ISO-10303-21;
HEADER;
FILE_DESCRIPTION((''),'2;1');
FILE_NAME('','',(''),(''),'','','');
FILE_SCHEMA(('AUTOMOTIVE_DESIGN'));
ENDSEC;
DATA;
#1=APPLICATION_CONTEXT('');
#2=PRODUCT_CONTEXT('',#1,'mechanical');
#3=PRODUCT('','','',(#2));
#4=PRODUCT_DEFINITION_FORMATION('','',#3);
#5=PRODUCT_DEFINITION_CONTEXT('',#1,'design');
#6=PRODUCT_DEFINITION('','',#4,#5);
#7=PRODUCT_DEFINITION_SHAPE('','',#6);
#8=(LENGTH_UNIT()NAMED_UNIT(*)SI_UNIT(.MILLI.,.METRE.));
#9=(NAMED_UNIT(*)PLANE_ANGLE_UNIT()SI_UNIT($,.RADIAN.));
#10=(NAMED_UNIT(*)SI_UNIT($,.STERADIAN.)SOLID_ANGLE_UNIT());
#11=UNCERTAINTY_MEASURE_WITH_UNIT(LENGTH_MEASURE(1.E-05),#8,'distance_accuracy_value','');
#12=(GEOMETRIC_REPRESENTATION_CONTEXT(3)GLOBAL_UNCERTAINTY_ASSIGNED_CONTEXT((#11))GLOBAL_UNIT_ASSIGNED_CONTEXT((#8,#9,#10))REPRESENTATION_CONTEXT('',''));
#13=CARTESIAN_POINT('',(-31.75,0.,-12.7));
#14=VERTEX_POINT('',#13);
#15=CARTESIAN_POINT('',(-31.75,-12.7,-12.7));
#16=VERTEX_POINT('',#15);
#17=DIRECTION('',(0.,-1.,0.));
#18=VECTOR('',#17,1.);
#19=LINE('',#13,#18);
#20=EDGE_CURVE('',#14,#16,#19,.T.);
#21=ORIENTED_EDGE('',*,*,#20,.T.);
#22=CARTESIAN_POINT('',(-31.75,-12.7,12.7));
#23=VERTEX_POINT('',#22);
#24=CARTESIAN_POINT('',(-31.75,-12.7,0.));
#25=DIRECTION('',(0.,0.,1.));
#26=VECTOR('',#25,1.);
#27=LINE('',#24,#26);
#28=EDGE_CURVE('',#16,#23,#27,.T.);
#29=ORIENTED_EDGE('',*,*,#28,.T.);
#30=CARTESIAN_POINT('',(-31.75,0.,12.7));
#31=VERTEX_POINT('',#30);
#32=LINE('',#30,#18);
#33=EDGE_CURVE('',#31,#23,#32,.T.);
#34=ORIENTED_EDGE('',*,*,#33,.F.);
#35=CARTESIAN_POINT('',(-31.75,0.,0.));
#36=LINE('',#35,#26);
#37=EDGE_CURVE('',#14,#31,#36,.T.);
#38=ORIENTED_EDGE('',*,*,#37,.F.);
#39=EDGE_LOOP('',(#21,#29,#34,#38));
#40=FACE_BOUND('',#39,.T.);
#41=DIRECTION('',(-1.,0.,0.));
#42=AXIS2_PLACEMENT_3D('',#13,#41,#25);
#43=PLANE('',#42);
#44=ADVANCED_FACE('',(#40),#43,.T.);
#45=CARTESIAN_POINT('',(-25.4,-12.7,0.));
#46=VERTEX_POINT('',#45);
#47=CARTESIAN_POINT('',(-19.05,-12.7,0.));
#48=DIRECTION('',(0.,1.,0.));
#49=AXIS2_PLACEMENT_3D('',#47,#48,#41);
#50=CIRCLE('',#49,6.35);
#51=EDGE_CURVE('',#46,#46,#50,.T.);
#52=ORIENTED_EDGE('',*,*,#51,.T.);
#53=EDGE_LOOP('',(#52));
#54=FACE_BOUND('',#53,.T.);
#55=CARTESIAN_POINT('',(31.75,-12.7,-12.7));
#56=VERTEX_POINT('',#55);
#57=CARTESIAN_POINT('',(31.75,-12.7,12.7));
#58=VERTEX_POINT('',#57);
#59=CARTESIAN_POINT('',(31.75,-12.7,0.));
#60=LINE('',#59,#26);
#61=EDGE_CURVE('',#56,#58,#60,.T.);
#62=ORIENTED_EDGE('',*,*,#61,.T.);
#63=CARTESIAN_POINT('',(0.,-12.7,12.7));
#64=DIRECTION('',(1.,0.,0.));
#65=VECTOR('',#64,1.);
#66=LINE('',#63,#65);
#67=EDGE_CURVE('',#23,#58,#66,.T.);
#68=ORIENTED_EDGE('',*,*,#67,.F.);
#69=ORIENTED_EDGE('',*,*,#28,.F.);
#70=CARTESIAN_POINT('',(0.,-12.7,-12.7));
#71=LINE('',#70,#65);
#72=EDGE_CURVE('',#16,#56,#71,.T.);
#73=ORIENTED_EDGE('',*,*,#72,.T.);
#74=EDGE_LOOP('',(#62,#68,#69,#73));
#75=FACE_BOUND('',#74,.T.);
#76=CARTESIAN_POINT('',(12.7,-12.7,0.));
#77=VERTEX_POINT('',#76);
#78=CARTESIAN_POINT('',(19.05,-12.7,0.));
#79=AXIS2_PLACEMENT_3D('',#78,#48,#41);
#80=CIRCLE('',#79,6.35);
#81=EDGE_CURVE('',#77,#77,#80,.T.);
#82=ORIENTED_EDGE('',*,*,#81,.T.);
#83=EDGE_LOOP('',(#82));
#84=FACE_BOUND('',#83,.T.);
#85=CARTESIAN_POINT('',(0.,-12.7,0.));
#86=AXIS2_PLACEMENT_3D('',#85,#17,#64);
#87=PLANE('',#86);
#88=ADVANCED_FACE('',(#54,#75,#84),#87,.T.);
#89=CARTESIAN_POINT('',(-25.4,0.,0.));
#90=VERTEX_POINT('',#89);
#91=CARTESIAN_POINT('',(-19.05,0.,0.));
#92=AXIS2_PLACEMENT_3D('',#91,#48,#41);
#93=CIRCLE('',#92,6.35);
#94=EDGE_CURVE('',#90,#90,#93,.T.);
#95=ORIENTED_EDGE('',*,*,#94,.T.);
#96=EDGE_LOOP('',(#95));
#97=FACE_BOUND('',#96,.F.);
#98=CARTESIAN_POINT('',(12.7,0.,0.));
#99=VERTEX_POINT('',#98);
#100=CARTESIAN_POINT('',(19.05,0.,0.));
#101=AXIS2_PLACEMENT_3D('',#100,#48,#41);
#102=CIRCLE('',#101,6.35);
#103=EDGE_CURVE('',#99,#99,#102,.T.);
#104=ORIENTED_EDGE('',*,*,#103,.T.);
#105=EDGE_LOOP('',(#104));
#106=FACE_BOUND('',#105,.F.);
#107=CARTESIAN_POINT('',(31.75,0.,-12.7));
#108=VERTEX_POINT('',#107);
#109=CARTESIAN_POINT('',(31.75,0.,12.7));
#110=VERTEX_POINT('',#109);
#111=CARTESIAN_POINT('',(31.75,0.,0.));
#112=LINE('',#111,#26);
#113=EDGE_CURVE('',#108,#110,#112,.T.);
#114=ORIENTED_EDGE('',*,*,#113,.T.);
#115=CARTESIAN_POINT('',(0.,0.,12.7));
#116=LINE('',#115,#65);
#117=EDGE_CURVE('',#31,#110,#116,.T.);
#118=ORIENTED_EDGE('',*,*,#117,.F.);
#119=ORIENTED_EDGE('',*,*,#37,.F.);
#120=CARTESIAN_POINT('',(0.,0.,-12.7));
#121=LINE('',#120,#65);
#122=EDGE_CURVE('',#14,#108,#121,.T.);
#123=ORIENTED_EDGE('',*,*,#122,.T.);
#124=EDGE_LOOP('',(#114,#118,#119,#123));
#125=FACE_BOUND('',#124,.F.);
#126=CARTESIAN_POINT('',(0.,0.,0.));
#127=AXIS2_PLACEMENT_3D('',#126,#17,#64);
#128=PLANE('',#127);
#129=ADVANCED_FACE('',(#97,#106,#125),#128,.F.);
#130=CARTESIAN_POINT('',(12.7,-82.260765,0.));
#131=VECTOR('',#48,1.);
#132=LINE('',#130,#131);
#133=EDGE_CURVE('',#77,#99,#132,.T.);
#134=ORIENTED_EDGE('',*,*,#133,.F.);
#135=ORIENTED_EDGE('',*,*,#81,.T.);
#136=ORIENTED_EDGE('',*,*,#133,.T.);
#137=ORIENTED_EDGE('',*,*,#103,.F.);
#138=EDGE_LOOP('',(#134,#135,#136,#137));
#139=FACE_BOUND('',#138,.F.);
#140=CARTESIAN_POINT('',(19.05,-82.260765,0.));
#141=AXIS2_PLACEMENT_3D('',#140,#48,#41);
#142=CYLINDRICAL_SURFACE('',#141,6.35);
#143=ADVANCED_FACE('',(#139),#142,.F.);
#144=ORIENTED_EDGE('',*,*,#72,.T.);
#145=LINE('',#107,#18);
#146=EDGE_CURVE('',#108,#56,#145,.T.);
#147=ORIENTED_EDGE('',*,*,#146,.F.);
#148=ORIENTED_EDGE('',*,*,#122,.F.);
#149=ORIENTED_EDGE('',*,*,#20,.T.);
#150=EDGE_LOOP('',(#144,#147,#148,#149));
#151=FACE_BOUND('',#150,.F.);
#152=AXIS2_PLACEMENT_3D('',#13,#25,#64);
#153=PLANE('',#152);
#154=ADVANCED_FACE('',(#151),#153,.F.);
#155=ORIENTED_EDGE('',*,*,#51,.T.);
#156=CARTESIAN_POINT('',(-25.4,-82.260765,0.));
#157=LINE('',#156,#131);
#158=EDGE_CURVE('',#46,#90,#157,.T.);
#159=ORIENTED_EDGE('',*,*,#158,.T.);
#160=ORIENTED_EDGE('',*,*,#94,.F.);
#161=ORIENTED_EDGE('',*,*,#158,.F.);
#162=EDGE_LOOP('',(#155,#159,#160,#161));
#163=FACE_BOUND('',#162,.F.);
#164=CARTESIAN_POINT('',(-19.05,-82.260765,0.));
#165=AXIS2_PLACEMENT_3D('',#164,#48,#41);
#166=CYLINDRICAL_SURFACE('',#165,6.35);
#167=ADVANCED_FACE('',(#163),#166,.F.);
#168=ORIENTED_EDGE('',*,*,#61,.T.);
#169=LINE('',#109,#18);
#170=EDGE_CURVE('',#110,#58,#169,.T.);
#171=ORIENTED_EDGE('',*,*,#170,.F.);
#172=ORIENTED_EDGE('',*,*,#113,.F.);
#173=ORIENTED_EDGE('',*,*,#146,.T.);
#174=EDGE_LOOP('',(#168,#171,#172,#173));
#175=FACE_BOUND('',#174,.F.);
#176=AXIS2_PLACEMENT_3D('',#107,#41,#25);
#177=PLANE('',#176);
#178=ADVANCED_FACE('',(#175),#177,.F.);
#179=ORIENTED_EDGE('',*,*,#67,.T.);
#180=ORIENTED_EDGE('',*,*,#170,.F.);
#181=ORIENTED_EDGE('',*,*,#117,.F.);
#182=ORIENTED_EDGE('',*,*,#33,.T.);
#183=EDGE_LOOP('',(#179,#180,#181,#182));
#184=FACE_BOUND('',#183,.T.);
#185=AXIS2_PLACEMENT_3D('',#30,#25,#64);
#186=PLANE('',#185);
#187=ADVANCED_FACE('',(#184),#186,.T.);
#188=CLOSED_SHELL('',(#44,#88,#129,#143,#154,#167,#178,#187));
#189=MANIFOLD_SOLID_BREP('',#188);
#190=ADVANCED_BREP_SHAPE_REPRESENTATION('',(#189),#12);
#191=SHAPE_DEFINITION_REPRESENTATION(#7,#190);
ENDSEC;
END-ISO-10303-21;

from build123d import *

# Parameters (mm, degrees)
F0_W     = 63.5
F0_H     = 25.4
F1_DEPTH = 12.7
F3_D     = 12.7


# Not quite as in the source:
# - a length typed as a fraction of an inch, garbled in the dataset ("3 / 203.2 mm" for 3/8 in), is restored


with BuildPart() as f1:
    # F0 (on Front) → F1 (new body)
    with BuildSketch(Plane.XZ):
        Rectangle(F0_W, F0_H)
    extrude(amount=F1_DEPTH)

    # F3 (through all)
    with Locations(Plane.XZ.offset(12.7)):
        with Locations((-19.05, 0), (19.05, 0)):
            Hole(F3_D / 2)


solid = f1.part
